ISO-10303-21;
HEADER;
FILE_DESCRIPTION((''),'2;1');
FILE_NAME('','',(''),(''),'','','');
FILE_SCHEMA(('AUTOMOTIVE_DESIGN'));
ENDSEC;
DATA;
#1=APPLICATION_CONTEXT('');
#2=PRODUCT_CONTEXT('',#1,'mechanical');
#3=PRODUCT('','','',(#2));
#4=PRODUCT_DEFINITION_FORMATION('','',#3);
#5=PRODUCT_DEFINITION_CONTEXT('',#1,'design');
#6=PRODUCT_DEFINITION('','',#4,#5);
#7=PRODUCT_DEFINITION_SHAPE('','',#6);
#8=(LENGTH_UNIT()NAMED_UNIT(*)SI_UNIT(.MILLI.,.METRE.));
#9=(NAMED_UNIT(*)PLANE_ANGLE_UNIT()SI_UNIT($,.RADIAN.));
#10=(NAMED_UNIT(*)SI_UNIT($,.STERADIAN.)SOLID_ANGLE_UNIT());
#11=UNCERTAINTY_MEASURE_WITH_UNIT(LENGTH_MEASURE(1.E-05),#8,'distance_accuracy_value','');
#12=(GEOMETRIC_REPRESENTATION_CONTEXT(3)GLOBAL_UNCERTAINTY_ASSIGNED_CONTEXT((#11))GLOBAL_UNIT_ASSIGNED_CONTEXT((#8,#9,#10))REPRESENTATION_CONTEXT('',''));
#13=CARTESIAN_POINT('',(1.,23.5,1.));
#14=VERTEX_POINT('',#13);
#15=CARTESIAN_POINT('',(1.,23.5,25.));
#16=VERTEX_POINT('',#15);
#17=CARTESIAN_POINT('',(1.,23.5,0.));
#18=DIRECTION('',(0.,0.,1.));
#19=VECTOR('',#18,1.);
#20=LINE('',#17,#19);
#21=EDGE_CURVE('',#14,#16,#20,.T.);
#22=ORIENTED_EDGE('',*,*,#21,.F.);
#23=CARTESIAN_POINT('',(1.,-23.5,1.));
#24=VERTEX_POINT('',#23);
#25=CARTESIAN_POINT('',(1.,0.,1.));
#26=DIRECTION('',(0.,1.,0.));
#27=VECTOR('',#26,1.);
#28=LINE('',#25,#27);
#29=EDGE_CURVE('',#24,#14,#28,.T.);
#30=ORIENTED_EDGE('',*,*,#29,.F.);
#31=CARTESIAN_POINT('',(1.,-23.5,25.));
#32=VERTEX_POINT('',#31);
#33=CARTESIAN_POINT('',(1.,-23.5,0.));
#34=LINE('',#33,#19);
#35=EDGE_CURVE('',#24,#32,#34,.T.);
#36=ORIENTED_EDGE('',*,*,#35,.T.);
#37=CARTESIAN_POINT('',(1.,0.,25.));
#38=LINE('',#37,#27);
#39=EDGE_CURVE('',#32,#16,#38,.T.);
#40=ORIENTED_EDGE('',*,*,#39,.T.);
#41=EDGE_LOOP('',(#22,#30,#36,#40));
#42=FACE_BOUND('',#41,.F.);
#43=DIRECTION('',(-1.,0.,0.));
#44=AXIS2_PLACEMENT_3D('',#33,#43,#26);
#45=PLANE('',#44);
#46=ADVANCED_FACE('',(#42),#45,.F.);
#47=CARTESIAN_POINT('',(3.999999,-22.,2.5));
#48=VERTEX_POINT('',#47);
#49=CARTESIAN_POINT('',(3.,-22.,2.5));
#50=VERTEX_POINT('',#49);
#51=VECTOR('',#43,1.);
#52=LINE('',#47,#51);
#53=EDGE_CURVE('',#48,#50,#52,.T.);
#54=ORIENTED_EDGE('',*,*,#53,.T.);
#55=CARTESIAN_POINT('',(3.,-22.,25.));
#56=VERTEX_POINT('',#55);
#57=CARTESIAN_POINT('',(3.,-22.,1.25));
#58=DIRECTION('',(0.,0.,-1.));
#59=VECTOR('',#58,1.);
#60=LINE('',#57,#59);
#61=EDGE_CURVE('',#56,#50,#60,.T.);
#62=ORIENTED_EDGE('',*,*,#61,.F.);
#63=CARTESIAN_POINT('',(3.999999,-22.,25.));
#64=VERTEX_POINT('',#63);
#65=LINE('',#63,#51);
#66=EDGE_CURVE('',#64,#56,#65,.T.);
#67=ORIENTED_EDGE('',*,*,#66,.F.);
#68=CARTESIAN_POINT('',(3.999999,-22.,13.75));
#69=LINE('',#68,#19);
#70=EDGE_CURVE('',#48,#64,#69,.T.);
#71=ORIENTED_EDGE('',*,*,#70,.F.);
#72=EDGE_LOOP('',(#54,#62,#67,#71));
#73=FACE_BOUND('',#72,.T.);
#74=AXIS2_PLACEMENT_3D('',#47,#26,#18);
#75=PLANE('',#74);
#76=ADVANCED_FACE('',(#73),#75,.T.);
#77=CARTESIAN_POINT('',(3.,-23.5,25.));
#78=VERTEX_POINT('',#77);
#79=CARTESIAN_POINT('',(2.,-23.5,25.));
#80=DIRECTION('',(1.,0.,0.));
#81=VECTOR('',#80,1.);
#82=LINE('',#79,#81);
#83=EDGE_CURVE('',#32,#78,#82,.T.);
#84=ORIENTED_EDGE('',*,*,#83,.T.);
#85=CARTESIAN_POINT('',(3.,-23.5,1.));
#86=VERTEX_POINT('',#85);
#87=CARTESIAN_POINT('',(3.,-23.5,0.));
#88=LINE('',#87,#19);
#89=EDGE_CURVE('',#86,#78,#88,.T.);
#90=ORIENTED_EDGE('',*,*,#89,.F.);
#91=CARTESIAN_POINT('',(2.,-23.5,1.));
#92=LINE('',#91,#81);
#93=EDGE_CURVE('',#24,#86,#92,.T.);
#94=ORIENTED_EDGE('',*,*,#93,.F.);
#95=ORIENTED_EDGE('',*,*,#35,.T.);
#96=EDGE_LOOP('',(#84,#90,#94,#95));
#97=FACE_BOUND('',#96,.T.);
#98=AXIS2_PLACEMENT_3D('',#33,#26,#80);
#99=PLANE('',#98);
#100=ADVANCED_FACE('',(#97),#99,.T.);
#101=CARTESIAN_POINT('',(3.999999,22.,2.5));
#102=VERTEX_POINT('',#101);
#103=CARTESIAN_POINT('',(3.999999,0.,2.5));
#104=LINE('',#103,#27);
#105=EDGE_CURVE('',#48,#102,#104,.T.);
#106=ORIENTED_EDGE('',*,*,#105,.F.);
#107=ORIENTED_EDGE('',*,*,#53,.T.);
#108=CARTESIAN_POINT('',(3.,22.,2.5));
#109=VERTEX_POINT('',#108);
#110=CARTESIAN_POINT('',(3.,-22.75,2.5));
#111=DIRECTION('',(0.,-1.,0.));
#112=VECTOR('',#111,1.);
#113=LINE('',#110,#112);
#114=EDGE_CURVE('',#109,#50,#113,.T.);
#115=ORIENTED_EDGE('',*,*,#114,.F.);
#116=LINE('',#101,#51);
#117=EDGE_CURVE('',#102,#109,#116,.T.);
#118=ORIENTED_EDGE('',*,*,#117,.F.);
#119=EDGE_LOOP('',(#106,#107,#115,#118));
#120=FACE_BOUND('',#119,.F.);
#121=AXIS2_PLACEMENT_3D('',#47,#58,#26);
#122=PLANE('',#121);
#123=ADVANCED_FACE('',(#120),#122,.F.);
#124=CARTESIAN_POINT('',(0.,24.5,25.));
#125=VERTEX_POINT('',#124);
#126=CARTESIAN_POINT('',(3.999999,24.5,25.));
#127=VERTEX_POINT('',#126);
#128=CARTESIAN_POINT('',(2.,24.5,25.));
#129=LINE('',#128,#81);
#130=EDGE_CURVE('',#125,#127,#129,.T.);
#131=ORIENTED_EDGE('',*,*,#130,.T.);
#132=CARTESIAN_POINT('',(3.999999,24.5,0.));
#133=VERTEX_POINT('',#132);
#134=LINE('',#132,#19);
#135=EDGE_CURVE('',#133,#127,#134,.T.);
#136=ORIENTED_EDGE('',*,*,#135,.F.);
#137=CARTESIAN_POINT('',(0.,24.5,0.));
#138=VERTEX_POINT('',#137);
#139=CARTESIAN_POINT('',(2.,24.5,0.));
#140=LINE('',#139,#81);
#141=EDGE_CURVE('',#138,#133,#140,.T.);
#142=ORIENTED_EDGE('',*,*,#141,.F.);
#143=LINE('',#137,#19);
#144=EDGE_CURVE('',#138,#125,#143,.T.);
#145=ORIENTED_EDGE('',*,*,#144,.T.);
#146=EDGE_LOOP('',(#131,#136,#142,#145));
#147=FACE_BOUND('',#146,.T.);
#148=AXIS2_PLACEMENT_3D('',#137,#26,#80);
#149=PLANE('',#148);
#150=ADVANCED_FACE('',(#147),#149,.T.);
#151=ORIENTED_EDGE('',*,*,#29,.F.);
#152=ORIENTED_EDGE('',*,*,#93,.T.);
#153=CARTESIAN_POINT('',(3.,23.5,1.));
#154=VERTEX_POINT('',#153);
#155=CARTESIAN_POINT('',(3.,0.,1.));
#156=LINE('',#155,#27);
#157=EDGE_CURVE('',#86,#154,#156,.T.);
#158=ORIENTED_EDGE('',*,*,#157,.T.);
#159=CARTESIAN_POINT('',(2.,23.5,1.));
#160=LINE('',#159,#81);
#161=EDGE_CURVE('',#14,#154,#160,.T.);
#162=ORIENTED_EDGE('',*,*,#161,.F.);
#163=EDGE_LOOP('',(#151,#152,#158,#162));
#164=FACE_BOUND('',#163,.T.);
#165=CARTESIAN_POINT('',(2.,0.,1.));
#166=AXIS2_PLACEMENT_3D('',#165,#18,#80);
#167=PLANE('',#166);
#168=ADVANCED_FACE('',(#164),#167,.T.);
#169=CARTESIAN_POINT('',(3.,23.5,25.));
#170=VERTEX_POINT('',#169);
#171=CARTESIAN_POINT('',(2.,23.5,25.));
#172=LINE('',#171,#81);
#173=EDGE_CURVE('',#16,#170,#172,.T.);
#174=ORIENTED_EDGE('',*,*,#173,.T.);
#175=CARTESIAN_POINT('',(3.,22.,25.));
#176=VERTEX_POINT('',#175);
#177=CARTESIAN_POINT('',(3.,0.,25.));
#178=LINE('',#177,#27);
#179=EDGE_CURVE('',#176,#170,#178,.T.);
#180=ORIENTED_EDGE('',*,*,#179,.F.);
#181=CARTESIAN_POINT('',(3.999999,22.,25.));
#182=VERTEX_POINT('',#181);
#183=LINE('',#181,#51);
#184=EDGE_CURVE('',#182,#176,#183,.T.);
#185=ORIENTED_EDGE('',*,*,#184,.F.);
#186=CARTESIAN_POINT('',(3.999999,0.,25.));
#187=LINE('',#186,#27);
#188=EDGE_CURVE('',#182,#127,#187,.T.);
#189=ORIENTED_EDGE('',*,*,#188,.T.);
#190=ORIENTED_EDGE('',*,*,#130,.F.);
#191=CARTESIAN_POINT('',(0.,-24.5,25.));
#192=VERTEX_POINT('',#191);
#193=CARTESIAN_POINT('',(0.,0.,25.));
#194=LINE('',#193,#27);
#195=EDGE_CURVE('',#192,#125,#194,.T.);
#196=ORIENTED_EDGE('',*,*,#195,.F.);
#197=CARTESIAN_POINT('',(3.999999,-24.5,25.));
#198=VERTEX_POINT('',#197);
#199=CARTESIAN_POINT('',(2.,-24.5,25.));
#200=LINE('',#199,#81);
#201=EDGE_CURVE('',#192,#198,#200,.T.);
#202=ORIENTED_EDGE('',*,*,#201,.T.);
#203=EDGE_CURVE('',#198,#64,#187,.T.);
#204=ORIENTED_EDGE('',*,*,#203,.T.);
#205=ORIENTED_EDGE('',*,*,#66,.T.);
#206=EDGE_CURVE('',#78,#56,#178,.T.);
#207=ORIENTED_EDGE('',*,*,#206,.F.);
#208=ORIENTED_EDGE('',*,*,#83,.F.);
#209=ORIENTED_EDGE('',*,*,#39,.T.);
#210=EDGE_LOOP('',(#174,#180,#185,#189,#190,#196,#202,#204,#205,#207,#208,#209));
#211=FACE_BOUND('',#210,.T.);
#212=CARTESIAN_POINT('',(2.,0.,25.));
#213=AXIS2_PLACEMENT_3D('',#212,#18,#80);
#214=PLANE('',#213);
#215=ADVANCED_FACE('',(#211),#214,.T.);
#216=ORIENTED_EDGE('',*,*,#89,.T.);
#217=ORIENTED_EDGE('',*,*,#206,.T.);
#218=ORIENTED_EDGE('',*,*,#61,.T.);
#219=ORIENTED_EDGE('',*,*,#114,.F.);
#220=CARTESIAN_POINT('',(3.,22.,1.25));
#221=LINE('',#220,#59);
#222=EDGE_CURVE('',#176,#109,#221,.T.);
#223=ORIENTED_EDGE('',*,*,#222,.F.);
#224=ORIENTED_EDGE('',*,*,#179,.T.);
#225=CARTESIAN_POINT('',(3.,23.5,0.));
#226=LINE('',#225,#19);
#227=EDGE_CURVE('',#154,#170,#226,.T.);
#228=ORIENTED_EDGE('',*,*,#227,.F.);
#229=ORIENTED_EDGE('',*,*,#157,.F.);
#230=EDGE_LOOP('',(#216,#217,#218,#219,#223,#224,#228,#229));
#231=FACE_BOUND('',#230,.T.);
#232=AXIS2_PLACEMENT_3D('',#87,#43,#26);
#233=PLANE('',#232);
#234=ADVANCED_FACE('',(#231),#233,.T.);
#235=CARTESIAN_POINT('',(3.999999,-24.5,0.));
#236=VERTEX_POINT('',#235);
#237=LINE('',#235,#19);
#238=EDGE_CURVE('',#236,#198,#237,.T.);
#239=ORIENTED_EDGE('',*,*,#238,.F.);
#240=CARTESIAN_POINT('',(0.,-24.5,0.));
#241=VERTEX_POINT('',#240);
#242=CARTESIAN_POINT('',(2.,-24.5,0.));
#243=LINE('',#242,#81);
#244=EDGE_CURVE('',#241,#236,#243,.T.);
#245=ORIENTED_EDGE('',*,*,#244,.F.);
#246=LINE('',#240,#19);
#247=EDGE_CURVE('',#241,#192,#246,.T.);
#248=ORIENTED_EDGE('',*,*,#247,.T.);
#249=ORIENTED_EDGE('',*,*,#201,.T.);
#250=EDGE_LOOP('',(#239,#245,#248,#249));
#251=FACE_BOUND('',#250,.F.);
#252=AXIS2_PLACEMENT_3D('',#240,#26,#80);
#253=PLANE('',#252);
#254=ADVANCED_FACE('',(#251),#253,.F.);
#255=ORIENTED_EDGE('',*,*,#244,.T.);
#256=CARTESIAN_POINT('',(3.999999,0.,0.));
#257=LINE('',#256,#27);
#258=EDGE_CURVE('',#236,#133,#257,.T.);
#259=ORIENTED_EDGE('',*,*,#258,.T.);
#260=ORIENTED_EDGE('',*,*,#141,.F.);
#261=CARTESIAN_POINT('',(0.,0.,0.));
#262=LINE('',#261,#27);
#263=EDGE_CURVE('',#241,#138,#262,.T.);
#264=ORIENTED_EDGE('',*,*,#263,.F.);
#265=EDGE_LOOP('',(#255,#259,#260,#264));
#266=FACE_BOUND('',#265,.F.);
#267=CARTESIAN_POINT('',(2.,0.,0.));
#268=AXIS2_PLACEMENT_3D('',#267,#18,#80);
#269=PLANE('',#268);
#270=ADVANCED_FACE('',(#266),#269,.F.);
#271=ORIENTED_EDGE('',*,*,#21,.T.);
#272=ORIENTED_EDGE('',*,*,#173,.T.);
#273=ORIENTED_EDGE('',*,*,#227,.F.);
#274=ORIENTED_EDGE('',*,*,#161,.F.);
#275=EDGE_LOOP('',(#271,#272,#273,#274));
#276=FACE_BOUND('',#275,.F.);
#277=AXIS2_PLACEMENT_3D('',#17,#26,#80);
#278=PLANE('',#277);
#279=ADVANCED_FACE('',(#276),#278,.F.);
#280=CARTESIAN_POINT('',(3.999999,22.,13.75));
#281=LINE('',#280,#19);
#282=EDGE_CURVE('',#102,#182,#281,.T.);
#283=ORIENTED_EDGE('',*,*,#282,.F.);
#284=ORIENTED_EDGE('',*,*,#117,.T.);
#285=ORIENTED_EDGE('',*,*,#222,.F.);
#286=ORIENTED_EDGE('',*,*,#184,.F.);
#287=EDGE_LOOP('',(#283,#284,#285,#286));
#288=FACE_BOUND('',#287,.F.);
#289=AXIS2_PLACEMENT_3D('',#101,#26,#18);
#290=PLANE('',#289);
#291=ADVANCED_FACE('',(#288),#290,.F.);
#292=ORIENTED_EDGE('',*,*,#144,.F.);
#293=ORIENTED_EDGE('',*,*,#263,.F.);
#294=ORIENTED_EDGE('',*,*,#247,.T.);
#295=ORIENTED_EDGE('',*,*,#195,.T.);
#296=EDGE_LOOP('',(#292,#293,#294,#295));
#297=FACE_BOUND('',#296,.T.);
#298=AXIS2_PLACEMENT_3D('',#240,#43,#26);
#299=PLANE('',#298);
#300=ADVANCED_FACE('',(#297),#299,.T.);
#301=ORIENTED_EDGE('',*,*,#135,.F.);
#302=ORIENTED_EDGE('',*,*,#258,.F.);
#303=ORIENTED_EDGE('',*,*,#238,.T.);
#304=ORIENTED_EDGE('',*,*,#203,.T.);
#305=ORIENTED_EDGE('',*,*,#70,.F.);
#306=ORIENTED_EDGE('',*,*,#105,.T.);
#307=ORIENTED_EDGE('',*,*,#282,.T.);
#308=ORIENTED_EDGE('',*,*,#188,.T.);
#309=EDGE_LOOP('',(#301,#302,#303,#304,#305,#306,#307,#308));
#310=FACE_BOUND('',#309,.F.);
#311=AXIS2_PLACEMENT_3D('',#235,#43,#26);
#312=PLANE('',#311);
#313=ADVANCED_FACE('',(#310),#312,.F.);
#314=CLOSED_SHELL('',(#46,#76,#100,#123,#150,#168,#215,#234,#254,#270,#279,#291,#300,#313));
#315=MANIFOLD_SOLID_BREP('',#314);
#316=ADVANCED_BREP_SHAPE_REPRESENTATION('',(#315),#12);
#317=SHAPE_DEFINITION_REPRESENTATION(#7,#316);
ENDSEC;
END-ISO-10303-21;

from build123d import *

# Parameters (mm, degrees)
F0_W     = 3.9999993443
F0_H     = 48.9999993443
F0_W_2   = 2
F0_H_2   = 47
F1_DEPTH = 25
F2_W     = 43.9999993443
F2_H     = 22.5
F3_DEPTH = 2
F4_DEPTH = 1


# Not quite as in the source:
# - a feature names something its author has since deleted; it is built from what else it names


with BuildPart() as f1:
    # F0 (on Top) → F1 (new body)
    with BuildSketch(Plane.XY):
        with Locations((1.9999996722, 0)):
            Rectangle(F0_W, F0_H)
        with Locations((1.9999996722, 0)):
            Rectangle(F0_W_2, F0_H_2, mode=Mode.SUBTRACT)
    extrude(amount=F1_DEPTH)

    # F2 (on face) → F3 (cut)
    with BuildSketch(Plane.YZ.offset(3.9999993443)):
        with Locations((0, 13.75)):
            Rectangle(F2_W, F2_H)
    extrude(amount=-F3_DEPTH, mode=Mode.SUBTRACT)

    # F0 (on Top) → F4 (join)
    with BuildSketch(Plane.XY):
        with Locations((1.9999996722, 0)):
            Rectangle(F0_W_2, F0_H_2)
    extrude(amount=F4_DEPTH)


solid = f1.part
